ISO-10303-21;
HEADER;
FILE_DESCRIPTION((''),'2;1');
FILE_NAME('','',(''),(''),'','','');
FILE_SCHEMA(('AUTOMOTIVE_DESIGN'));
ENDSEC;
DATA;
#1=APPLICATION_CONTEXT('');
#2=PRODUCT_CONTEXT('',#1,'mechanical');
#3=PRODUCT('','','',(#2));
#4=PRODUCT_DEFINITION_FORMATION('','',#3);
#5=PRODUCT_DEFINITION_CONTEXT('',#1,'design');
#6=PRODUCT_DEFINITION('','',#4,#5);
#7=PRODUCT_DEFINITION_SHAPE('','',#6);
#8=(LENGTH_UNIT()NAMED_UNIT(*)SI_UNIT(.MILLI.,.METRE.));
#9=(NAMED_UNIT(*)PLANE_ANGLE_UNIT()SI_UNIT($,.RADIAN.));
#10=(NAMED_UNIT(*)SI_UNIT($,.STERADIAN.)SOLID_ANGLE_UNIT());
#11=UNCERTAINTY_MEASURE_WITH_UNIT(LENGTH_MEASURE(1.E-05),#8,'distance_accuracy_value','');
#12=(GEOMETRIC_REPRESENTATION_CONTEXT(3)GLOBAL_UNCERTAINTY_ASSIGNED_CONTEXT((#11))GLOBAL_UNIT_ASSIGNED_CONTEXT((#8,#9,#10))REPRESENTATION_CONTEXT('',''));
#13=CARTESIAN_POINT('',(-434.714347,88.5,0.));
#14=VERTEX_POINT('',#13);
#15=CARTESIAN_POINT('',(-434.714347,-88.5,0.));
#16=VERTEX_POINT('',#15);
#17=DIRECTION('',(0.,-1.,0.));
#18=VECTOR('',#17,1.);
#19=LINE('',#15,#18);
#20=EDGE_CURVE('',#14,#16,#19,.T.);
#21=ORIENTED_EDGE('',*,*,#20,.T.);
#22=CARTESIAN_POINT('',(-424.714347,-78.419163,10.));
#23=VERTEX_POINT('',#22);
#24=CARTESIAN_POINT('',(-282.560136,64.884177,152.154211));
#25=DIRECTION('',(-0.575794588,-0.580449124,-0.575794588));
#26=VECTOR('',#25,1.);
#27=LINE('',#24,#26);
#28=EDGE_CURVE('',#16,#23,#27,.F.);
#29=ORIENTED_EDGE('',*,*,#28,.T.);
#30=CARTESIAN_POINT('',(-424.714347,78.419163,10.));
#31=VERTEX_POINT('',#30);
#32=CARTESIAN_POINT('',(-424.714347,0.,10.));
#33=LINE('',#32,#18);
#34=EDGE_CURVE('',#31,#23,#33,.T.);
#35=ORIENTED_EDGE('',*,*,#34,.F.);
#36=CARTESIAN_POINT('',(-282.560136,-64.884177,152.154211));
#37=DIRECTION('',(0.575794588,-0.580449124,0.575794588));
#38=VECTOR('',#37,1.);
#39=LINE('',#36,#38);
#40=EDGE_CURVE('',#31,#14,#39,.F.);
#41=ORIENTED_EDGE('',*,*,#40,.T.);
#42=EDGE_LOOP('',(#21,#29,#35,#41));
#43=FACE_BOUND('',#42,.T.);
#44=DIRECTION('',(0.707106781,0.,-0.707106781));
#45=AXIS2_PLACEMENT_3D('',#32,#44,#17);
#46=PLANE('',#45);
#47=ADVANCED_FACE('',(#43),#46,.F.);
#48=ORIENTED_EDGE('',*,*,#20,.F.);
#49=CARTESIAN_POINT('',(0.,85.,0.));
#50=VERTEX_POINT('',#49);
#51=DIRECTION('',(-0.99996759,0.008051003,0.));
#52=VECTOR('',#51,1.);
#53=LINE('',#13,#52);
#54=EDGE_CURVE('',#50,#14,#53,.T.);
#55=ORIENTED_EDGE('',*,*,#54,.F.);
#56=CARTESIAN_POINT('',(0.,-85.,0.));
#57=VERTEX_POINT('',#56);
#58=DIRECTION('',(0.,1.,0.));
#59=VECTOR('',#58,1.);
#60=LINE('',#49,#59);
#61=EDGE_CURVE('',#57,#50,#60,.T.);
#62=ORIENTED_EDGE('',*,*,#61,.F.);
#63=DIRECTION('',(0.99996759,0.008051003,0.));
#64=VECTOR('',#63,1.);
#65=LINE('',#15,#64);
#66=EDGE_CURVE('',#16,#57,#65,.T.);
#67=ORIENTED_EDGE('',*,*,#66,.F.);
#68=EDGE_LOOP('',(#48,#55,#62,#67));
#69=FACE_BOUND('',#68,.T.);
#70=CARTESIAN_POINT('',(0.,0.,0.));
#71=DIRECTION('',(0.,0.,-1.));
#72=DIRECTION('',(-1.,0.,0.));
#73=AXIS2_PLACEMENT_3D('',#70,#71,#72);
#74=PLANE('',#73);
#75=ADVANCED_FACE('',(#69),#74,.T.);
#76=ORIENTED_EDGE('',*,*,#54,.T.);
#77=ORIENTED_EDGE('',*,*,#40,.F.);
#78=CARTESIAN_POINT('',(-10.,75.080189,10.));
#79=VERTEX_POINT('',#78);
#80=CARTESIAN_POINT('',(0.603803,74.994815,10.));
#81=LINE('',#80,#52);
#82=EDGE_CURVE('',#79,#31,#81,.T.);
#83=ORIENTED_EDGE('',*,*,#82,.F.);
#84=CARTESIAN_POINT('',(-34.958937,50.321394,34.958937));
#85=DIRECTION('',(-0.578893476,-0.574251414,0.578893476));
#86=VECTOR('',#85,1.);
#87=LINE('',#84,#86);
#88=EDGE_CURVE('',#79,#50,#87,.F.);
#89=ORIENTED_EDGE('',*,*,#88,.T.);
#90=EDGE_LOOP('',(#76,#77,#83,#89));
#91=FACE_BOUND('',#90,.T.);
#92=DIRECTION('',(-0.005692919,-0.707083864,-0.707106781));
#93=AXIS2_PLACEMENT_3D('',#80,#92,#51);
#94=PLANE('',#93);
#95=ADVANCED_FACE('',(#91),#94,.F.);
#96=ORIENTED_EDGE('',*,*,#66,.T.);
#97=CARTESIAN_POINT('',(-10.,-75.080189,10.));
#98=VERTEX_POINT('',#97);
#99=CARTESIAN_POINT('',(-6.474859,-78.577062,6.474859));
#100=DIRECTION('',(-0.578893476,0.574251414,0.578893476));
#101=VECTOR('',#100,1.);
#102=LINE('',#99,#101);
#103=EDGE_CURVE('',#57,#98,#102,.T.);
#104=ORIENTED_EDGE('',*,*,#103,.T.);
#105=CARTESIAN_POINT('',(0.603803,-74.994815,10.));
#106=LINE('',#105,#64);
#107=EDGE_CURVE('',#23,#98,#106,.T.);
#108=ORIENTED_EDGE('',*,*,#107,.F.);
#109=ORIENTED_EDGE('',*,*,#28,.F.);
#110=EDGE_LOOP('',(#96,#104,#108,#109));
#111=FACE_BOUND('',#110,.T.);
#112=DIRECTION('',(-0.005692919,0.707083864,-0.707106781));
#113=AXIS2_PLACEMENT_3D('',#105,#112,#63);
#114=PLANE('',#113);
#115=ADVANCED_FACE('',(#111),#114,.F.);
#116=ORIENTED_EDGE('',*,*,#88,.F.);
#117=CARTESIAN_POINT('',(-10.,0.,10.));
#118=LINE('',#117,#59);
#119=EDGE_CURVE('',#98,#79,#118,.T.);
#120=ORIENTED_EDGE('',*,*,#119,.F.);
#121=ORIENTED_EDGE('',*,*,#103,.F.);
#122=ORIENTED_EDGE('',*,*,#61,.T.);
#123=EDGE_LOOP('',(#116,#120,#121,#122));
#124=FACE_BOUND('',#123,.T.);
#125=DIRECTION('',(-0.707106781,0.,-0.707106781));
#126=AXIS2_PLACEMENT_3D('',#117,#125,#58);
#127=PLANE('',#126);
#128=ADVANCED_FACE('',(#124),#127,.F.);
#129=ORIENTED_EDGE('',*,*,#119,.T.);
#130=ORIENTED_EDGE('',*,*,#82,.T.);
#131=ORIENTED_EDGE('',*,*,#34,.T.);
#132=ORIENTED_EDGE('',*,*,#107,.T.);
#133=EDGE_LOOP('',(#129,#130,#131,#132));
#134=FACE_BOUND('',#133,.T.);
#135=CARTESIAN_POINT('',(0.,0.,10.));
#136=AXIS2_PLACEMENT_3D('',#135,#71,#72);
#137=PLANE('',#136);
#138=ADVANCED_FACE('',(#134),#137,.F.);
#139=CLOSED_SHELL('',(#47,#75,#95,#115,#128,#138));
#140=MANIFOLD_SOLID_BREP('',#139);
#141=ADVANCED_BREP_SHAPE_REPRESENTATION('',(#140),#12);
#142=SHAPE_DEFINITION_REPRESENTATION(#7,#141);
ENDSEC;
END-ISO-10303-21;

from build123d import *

# Parameters (mm, degrees)
AUFSATZ_LINEAR_AUSTRAGEN1_DEPTH = 10
FASE1_SIZE                      = 10


with BuildPart() as part:
    # Skizze1 → Aufsatz-Linear austragen1 (new body)
    with BuildSketch(Plane.XY):
        Polygon((-434.714346895, -88.5), (-434.714346895, 88.5), (0, 85), (0, -85), align=None)
    extrude(amount=AUFSATZ_LINEAR_AUSTRAGEN1_DEPTH)

    # Fase1
    fase1_edges = [part.edges().sort_by_distance(p)[0] for p in [
        (-434.714346895, 0, 10),
        (-217.357173448, 86.75, 10),
        (0, 0, 10),
        (-217.357173448, -86.75, 10),
    ]]
    chamfer(fase1_edges, length=FASE1_SIZE - 0.0001)  # a hair under: the kernel refuses the full size


solid = part.part
